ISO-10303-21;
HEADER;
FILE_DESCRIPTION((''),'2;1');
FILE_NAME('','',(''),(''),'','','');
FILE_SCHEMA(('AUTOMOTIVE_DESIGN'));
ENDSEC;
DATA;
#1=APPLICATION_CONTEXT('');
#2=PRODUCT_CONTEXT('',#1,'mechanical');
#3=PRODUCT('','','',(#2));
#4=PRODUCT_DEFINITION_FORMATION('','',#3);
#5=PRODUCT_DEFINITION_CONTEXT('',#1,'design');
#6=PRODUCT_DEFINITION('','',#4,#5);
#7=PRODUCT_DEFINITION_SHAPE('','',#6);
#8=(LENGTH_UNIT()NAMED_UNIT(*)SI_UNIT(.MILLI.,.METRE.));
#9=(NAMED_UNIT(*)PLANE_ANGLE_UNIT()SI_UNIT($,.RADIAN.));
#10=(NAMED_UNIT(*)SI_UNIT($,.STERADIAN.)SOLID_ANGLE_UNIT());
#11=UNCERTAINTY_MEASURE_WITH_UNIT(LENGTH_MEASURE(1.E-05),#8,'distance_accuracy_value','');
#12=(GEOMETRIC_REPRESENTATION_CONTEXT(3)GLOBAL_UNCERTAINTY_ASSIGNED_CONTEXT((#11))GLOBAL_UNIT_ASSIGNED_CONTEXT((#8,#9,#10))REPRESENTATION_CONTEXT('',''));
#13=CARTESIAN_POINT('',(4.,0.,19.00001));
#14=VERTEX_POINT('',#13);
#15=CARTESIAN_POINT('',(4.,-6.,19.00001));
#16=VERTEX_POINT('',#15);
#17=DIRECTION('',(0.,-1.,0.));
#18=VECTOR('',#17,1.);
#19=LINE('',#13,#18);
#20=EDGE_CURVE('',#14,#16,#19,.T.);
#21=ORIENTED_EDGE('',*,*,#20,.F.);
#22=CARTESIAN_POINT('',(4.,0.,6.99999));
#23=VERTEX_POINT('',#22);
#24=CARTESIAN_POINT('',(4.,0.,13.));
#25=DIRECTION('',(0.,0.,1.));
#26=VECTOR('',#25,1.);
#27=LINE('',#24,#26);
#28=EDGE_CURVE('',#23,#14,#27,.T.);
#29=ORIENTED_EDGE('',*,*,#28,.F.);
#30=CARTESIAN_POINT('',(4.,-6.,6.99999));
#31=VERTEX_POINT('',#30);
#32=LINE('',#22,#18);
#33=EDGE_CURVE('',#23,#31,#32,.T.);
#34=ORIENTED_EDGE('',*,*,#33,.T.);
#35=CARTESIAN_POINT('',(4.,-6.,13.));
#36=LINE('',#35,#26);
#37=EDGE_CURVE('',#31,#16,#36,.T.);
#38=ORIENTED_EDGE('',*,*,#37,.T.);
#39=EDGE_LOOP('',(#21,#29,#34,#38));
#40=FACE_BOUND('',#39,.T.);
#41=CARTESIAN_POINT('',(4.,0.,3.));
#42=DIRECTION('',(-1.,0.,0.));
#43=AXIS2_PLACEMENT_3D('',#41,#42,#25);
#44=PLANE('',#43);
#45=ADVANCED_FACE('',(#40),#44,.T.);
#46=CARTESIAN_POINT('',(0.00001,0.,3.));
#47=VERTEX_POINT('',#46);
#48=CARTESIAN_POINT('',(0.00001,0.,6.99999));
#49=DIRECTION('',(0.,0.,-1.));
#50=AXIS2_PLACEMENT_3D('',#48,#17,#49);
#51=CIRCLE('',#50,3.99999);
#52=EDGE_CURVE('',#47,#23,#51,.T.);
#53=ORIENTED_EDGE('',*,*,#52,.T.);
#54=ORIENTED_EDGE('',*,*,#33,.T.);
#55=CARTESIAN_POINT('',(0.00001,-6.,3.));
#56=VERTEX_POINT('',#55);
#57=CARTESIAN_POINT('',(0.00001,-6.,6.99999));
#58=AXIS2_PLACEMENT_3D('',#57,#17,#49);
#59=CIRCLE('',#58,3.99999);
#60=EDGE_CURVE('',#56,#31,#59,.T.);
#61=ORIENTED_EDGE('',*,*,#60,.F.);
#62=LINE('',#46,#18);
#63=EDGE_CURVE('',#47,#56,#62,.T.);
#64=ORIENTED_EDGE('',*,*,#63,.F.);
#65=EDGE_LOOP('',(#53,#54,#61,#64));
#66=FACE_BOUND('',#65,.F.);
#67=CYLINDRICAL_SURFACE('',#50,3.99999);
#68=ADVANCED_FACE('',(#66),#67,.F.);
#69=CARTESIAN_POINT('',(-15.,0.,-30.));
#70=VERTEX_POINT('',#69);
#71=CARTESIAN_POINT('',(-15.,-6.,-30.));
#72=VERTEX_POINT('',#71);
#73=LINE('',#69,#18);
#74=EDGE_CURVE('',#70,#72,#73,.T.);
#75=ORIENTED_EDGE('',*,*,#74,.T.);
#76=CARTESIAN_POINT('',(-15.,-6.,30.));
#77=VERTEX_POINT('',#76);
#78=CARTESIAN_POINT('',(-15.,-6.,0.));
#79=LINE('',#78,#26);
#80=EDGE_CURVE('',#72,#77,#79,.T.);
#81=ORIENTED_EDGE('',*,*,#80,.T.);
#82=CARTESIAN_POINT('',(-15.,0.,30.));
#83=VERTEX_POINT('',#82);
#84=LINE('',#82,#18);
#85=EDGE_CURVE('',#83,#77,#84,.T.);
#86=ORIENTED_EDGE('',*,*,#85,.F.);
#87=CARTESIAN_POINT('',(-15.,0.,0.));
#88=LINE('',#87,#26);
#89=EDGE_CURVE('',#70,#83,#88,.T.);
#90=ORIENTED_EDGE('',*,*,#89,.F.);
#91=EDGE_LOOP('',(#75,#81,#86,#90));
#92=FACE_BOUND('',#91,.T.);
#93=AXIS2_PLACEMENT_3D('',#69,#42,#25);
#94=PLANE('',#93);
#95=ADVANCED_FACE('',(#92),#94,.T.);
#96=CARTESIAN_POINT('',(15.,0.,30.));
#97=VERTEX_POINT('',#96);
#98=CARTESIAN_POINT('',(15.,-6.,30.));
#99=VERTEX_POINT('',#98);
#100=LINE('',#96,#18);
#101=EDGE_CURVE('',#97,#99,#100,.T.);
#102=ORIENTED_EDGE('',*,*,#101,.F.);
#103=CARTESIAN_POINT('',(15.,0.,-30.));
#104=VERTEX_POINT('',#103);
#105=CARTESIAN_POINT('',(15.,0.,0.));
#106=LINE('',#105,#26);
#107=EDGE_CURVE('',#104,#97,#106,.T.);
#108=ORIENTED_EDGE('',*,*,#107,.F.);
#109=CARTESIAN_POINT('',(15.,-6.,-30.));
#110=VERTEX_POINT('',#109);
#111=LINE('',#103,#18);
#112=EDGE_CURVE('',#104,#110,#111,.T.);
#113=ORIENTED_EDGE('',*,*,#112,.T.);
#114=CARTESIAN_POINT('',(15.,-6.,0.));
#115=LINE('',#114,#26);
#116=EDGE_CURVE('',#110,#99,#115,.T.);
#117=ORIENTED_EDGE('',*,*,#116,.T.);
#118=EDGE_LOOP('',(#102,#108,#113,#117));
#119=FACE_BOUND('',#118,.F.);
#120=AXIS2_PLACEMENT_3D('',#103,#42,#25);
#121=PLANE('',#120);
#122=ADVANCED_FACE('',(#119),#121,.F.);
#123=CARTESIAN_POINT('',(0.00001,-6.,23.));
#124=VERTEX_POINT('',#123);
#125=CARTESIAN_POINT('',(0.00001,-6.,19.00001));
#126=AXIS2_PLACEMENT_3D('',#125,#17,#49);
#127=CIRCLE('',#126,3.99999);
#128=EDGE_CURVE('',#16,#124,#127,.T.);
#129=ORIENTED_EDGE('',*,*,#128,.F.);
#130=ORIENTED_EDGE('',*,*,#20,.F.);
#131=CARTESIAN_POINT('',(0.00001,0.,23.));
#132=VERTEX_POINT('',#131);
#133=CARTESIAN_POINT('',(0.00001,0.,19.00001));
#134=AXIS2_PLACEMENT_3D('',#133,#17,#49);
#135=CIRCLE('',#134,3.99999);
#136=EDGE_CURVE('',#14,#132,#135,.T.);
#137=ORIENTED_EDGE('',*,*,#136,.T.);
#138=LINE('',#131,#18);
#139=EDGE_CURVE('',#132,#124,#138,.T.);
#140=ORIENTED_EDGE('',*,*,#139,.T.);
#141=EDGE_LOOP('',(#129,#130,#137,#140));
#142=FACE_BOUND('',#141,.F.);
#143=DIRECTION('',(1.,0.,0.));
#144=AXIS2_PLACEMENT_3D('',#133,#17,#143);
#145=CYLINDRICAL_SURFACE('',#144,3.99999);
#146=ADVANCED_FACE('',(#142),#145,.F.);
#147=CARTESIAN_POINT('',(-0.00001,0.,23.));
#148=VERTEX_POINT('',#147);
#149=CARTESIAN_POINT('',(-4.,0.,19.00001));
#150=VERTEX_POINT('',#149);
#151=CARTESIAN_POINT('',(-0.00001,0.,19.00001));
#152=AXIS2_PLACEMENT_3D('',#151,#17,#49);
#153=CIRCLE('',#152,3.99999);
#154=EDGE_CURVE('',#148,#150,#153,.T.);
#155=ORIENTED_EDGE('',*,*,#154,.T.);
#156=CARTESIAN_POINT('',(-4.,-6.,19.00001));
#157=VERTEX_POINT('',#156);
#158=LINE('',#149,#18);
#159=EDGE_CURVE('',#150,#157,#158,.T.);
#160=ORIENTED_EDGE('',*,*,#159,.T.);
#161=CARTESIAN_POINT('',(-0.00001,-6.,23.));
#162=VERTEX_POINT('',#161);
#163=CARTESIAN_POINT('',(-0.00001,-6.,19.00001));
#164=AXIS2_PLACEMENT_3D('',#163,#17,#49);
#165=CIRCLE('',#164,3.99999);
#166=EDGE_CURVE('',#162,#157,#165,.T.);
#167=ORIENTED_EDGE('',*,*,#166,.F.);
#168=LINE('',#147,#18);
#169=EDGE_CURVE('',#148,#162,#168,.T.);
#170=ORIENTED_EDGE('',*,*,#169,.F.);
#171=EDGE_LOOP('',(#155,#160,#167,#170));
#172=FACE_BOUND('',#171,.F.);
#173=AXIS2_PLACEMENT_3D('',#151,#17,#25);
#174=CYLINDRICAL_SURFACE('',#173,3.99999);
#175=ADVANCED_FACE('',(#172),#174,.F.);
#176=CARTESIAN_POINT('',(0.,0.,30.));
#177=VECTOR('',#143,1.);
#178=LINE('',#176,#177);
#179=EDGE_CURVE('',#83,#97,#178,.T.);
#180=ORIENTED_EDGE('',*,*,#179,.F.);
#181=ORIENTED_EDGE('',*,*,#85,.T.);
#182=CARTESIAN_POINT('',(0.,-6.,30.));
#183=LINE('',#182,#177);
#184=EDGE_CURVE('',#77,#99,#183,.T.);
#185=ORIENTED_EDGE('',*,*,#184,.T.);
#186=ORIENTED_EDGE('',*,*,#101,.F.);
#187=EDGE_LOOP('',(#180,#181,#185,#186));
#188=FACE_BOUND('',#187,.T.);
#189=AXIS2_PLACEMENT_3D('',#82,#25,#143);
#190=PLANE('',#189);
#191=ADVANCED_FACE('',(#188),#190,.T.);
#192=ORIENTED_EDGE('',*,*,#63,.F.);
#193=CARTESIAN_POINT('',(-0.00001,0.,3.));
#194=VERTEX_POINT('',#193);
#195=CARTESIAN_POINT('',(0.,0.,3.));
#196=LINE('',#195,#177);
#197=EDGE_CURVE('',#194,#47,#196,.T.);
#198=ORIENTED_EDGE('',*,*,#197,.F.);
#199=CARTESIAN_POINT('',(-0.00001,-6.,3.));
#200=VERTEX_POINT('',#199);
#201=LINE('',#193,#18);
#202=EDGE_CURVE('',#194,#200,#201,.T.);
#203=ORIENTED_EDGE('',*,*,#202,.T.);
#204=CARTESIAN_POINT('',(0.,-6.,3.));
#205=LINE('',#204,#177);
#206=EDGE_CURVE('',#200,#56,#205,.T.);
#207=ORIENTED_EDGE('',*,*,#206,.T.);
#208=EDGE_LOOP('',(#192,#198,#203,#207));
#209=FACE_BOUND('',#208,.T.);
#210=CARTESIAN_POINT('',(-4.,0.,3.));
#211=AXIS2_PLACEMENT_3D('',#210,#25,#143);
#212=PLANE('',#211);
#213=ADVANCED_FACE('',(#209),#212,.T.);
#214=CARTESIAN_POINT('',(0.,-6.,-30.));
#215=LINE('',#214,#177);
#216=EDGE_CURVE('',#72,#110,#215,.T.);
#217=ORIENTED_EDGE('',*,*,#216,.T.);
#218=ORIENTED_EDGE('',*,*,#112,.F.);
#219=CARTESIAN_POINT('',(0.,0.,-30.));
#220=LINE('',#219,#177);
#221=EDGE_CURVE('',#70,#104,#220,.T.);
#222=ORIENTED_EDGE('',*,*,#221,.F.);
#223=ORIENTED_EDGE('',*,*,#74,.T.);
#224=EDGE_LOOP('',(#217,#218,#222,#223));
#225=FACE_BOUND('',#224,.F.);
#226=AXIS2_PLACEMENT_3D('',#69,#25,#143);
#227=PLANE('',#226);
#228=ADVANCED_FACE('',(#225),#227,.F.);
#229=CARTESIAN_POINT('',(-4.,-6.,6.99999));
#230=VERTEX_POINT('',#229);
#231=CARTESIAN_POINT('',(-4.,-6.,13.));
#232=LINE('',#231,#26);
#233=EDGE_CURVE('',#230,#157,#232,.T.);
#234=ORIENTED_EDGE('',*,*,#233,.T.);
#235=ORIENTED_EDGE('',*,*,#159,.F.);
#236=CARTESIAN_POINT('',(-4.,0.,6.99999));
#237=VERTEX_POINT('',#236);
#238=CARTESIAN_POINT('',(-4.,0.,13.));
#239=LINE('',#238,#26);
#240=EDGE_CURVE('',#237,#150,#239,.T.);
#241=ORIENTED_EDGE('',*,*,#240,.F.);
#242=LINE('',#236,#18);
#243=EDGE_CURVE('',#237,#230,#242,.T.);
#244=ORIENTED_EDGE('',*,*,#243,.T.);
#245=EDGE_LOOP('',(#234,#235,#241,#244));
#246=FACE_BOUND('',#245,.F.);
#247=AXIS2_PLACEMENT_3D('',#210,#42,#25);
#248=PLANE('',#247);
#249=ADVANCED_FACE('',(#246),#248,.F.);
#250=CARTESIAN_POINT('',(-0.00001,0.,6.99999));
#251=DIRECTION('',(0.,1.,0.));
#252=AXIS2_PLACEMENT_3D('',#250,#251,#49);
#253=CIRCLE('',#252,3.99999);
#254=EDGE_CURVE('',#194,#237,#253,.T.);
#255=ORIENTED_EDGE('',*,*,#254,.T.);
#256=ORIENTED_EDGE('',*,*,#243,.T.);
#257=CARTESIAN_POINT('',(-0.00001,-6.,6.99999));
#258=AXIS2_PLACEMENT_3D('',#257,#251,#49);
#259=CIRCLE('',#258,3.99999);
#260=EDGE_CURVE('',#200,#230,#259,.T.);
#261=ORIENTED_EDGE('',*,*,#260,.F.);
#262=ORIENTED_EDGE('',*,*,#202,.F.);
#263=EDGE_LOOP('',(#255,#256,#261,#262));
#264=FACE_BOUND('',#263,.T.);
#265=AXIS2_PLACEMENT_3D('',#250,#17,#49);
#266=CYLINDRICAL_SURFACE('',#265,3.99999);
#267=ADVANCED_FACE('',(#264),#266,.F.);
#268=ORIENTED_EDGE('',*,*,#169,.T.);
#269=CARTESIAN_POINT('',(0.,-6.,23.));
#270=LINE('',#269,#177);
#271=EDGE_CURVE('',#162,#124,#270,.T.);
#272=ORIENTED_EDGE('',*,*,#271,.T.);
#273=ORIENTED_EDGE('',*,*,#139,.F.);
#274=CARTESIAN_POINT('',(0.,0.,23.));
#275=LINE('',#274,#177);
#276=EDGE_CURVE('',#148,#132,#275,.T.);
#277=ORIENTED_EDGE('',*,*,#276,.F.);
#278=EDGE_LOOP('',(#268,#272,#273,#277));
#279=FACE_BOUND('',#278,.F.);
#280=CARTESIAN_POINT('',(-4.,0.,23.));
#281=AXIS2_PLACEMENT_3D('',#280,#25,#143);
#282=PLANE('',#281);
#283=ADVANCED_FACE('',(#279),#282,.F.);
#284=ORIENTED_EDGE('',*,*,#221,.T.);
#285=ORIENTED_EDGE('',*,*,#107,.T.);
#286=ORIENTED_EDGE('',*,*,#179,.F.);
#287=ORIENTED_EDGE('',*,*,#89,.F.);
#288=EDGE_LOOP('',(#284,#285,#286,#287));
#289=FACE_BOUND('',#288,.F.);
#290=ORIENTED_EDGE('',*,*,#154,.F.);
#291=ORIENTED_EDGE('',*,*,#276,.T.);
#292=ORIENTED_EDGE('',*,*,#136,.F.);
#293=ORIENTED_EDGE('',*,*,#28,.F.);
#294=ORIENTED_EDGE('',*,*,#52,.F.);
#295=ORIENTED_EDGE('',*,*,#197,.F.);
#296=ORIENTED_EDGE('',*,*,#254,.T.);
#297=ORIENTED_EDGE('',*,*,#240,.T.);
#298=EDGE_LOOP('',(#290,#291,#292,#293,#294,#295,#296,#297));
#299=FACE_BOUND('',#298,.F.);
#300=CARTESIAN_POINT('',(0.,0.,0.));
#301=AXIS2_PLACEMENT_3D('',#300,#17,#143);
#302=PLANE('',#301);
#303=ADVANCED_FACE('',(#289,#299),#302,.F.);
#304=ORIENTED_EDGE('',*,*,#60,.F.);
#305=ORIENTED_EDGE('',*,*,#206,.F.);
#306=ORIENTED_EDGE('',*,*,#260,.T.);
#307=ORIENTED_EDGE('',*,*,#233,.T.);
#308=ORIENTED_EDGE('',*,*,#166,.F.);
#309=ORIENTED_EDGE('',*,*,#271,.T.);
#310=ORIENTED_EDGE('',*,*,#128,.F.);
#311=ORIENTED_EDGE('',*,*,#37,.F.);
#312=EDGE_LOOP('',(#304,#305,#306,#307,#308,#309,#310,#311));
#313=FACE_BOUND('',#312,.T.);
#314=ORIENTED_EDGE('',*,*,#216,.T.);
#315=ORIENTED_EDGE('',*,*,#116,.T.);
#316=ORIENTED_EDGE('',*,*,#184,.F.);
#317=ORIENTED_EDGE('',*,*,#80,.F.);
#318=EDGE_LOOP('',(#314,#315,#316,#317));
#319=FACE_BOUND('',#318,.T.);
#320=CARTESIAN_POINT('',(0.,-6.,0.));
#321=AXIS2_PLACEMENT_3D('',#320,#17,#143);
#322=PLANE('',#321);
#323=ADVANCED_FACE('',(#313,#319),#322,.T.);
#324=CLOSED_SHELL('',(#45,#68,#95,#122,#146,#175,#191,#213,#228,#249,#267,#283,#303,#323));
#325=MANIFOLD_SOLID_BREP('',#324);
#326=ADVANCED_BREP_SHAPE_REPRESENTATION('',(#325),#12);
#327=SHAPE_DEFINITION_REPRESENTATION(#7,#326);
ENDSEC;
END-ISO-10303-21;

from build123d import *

# Parameters (mm, degrees)
F0_W     = 30
F0_H     = 60
F0_W_2   = 8
F0_H_2   = 20
F1_DEPTH = 6
F2_R     = 3.99999


# Not quite as in the source:
# - a fillet or chamfer is up to 0.001 mm smaller than in the source, because OpenCascade refuses the exact size


with BuildPart() as f1:
    # F0 (on Front) → F1 (new body)
    with BuildSketch(Plane.XZ):
        Rectangle(F0_W, F0_H)
        with Locations((0, 13)):
            Rectangle(F0_W_2, F0_H_2, mode=Mode.SUBTRACT)
    extrude(amount=F1_DEPTH)

    # F2 (radius 4 in the source; OpenCascade refuses exactly that, so slightly less here)
    f2_edges = [f1.edges().sort_by_distance(p)[0] for p in [
        (-4, -3, 23),
        (4, -3, 23),
        (-4, -3, 3),
        (4, -3, 3),
    ]]
    fillet(f2_edges, radius=F2_R)


solid = f1.part
